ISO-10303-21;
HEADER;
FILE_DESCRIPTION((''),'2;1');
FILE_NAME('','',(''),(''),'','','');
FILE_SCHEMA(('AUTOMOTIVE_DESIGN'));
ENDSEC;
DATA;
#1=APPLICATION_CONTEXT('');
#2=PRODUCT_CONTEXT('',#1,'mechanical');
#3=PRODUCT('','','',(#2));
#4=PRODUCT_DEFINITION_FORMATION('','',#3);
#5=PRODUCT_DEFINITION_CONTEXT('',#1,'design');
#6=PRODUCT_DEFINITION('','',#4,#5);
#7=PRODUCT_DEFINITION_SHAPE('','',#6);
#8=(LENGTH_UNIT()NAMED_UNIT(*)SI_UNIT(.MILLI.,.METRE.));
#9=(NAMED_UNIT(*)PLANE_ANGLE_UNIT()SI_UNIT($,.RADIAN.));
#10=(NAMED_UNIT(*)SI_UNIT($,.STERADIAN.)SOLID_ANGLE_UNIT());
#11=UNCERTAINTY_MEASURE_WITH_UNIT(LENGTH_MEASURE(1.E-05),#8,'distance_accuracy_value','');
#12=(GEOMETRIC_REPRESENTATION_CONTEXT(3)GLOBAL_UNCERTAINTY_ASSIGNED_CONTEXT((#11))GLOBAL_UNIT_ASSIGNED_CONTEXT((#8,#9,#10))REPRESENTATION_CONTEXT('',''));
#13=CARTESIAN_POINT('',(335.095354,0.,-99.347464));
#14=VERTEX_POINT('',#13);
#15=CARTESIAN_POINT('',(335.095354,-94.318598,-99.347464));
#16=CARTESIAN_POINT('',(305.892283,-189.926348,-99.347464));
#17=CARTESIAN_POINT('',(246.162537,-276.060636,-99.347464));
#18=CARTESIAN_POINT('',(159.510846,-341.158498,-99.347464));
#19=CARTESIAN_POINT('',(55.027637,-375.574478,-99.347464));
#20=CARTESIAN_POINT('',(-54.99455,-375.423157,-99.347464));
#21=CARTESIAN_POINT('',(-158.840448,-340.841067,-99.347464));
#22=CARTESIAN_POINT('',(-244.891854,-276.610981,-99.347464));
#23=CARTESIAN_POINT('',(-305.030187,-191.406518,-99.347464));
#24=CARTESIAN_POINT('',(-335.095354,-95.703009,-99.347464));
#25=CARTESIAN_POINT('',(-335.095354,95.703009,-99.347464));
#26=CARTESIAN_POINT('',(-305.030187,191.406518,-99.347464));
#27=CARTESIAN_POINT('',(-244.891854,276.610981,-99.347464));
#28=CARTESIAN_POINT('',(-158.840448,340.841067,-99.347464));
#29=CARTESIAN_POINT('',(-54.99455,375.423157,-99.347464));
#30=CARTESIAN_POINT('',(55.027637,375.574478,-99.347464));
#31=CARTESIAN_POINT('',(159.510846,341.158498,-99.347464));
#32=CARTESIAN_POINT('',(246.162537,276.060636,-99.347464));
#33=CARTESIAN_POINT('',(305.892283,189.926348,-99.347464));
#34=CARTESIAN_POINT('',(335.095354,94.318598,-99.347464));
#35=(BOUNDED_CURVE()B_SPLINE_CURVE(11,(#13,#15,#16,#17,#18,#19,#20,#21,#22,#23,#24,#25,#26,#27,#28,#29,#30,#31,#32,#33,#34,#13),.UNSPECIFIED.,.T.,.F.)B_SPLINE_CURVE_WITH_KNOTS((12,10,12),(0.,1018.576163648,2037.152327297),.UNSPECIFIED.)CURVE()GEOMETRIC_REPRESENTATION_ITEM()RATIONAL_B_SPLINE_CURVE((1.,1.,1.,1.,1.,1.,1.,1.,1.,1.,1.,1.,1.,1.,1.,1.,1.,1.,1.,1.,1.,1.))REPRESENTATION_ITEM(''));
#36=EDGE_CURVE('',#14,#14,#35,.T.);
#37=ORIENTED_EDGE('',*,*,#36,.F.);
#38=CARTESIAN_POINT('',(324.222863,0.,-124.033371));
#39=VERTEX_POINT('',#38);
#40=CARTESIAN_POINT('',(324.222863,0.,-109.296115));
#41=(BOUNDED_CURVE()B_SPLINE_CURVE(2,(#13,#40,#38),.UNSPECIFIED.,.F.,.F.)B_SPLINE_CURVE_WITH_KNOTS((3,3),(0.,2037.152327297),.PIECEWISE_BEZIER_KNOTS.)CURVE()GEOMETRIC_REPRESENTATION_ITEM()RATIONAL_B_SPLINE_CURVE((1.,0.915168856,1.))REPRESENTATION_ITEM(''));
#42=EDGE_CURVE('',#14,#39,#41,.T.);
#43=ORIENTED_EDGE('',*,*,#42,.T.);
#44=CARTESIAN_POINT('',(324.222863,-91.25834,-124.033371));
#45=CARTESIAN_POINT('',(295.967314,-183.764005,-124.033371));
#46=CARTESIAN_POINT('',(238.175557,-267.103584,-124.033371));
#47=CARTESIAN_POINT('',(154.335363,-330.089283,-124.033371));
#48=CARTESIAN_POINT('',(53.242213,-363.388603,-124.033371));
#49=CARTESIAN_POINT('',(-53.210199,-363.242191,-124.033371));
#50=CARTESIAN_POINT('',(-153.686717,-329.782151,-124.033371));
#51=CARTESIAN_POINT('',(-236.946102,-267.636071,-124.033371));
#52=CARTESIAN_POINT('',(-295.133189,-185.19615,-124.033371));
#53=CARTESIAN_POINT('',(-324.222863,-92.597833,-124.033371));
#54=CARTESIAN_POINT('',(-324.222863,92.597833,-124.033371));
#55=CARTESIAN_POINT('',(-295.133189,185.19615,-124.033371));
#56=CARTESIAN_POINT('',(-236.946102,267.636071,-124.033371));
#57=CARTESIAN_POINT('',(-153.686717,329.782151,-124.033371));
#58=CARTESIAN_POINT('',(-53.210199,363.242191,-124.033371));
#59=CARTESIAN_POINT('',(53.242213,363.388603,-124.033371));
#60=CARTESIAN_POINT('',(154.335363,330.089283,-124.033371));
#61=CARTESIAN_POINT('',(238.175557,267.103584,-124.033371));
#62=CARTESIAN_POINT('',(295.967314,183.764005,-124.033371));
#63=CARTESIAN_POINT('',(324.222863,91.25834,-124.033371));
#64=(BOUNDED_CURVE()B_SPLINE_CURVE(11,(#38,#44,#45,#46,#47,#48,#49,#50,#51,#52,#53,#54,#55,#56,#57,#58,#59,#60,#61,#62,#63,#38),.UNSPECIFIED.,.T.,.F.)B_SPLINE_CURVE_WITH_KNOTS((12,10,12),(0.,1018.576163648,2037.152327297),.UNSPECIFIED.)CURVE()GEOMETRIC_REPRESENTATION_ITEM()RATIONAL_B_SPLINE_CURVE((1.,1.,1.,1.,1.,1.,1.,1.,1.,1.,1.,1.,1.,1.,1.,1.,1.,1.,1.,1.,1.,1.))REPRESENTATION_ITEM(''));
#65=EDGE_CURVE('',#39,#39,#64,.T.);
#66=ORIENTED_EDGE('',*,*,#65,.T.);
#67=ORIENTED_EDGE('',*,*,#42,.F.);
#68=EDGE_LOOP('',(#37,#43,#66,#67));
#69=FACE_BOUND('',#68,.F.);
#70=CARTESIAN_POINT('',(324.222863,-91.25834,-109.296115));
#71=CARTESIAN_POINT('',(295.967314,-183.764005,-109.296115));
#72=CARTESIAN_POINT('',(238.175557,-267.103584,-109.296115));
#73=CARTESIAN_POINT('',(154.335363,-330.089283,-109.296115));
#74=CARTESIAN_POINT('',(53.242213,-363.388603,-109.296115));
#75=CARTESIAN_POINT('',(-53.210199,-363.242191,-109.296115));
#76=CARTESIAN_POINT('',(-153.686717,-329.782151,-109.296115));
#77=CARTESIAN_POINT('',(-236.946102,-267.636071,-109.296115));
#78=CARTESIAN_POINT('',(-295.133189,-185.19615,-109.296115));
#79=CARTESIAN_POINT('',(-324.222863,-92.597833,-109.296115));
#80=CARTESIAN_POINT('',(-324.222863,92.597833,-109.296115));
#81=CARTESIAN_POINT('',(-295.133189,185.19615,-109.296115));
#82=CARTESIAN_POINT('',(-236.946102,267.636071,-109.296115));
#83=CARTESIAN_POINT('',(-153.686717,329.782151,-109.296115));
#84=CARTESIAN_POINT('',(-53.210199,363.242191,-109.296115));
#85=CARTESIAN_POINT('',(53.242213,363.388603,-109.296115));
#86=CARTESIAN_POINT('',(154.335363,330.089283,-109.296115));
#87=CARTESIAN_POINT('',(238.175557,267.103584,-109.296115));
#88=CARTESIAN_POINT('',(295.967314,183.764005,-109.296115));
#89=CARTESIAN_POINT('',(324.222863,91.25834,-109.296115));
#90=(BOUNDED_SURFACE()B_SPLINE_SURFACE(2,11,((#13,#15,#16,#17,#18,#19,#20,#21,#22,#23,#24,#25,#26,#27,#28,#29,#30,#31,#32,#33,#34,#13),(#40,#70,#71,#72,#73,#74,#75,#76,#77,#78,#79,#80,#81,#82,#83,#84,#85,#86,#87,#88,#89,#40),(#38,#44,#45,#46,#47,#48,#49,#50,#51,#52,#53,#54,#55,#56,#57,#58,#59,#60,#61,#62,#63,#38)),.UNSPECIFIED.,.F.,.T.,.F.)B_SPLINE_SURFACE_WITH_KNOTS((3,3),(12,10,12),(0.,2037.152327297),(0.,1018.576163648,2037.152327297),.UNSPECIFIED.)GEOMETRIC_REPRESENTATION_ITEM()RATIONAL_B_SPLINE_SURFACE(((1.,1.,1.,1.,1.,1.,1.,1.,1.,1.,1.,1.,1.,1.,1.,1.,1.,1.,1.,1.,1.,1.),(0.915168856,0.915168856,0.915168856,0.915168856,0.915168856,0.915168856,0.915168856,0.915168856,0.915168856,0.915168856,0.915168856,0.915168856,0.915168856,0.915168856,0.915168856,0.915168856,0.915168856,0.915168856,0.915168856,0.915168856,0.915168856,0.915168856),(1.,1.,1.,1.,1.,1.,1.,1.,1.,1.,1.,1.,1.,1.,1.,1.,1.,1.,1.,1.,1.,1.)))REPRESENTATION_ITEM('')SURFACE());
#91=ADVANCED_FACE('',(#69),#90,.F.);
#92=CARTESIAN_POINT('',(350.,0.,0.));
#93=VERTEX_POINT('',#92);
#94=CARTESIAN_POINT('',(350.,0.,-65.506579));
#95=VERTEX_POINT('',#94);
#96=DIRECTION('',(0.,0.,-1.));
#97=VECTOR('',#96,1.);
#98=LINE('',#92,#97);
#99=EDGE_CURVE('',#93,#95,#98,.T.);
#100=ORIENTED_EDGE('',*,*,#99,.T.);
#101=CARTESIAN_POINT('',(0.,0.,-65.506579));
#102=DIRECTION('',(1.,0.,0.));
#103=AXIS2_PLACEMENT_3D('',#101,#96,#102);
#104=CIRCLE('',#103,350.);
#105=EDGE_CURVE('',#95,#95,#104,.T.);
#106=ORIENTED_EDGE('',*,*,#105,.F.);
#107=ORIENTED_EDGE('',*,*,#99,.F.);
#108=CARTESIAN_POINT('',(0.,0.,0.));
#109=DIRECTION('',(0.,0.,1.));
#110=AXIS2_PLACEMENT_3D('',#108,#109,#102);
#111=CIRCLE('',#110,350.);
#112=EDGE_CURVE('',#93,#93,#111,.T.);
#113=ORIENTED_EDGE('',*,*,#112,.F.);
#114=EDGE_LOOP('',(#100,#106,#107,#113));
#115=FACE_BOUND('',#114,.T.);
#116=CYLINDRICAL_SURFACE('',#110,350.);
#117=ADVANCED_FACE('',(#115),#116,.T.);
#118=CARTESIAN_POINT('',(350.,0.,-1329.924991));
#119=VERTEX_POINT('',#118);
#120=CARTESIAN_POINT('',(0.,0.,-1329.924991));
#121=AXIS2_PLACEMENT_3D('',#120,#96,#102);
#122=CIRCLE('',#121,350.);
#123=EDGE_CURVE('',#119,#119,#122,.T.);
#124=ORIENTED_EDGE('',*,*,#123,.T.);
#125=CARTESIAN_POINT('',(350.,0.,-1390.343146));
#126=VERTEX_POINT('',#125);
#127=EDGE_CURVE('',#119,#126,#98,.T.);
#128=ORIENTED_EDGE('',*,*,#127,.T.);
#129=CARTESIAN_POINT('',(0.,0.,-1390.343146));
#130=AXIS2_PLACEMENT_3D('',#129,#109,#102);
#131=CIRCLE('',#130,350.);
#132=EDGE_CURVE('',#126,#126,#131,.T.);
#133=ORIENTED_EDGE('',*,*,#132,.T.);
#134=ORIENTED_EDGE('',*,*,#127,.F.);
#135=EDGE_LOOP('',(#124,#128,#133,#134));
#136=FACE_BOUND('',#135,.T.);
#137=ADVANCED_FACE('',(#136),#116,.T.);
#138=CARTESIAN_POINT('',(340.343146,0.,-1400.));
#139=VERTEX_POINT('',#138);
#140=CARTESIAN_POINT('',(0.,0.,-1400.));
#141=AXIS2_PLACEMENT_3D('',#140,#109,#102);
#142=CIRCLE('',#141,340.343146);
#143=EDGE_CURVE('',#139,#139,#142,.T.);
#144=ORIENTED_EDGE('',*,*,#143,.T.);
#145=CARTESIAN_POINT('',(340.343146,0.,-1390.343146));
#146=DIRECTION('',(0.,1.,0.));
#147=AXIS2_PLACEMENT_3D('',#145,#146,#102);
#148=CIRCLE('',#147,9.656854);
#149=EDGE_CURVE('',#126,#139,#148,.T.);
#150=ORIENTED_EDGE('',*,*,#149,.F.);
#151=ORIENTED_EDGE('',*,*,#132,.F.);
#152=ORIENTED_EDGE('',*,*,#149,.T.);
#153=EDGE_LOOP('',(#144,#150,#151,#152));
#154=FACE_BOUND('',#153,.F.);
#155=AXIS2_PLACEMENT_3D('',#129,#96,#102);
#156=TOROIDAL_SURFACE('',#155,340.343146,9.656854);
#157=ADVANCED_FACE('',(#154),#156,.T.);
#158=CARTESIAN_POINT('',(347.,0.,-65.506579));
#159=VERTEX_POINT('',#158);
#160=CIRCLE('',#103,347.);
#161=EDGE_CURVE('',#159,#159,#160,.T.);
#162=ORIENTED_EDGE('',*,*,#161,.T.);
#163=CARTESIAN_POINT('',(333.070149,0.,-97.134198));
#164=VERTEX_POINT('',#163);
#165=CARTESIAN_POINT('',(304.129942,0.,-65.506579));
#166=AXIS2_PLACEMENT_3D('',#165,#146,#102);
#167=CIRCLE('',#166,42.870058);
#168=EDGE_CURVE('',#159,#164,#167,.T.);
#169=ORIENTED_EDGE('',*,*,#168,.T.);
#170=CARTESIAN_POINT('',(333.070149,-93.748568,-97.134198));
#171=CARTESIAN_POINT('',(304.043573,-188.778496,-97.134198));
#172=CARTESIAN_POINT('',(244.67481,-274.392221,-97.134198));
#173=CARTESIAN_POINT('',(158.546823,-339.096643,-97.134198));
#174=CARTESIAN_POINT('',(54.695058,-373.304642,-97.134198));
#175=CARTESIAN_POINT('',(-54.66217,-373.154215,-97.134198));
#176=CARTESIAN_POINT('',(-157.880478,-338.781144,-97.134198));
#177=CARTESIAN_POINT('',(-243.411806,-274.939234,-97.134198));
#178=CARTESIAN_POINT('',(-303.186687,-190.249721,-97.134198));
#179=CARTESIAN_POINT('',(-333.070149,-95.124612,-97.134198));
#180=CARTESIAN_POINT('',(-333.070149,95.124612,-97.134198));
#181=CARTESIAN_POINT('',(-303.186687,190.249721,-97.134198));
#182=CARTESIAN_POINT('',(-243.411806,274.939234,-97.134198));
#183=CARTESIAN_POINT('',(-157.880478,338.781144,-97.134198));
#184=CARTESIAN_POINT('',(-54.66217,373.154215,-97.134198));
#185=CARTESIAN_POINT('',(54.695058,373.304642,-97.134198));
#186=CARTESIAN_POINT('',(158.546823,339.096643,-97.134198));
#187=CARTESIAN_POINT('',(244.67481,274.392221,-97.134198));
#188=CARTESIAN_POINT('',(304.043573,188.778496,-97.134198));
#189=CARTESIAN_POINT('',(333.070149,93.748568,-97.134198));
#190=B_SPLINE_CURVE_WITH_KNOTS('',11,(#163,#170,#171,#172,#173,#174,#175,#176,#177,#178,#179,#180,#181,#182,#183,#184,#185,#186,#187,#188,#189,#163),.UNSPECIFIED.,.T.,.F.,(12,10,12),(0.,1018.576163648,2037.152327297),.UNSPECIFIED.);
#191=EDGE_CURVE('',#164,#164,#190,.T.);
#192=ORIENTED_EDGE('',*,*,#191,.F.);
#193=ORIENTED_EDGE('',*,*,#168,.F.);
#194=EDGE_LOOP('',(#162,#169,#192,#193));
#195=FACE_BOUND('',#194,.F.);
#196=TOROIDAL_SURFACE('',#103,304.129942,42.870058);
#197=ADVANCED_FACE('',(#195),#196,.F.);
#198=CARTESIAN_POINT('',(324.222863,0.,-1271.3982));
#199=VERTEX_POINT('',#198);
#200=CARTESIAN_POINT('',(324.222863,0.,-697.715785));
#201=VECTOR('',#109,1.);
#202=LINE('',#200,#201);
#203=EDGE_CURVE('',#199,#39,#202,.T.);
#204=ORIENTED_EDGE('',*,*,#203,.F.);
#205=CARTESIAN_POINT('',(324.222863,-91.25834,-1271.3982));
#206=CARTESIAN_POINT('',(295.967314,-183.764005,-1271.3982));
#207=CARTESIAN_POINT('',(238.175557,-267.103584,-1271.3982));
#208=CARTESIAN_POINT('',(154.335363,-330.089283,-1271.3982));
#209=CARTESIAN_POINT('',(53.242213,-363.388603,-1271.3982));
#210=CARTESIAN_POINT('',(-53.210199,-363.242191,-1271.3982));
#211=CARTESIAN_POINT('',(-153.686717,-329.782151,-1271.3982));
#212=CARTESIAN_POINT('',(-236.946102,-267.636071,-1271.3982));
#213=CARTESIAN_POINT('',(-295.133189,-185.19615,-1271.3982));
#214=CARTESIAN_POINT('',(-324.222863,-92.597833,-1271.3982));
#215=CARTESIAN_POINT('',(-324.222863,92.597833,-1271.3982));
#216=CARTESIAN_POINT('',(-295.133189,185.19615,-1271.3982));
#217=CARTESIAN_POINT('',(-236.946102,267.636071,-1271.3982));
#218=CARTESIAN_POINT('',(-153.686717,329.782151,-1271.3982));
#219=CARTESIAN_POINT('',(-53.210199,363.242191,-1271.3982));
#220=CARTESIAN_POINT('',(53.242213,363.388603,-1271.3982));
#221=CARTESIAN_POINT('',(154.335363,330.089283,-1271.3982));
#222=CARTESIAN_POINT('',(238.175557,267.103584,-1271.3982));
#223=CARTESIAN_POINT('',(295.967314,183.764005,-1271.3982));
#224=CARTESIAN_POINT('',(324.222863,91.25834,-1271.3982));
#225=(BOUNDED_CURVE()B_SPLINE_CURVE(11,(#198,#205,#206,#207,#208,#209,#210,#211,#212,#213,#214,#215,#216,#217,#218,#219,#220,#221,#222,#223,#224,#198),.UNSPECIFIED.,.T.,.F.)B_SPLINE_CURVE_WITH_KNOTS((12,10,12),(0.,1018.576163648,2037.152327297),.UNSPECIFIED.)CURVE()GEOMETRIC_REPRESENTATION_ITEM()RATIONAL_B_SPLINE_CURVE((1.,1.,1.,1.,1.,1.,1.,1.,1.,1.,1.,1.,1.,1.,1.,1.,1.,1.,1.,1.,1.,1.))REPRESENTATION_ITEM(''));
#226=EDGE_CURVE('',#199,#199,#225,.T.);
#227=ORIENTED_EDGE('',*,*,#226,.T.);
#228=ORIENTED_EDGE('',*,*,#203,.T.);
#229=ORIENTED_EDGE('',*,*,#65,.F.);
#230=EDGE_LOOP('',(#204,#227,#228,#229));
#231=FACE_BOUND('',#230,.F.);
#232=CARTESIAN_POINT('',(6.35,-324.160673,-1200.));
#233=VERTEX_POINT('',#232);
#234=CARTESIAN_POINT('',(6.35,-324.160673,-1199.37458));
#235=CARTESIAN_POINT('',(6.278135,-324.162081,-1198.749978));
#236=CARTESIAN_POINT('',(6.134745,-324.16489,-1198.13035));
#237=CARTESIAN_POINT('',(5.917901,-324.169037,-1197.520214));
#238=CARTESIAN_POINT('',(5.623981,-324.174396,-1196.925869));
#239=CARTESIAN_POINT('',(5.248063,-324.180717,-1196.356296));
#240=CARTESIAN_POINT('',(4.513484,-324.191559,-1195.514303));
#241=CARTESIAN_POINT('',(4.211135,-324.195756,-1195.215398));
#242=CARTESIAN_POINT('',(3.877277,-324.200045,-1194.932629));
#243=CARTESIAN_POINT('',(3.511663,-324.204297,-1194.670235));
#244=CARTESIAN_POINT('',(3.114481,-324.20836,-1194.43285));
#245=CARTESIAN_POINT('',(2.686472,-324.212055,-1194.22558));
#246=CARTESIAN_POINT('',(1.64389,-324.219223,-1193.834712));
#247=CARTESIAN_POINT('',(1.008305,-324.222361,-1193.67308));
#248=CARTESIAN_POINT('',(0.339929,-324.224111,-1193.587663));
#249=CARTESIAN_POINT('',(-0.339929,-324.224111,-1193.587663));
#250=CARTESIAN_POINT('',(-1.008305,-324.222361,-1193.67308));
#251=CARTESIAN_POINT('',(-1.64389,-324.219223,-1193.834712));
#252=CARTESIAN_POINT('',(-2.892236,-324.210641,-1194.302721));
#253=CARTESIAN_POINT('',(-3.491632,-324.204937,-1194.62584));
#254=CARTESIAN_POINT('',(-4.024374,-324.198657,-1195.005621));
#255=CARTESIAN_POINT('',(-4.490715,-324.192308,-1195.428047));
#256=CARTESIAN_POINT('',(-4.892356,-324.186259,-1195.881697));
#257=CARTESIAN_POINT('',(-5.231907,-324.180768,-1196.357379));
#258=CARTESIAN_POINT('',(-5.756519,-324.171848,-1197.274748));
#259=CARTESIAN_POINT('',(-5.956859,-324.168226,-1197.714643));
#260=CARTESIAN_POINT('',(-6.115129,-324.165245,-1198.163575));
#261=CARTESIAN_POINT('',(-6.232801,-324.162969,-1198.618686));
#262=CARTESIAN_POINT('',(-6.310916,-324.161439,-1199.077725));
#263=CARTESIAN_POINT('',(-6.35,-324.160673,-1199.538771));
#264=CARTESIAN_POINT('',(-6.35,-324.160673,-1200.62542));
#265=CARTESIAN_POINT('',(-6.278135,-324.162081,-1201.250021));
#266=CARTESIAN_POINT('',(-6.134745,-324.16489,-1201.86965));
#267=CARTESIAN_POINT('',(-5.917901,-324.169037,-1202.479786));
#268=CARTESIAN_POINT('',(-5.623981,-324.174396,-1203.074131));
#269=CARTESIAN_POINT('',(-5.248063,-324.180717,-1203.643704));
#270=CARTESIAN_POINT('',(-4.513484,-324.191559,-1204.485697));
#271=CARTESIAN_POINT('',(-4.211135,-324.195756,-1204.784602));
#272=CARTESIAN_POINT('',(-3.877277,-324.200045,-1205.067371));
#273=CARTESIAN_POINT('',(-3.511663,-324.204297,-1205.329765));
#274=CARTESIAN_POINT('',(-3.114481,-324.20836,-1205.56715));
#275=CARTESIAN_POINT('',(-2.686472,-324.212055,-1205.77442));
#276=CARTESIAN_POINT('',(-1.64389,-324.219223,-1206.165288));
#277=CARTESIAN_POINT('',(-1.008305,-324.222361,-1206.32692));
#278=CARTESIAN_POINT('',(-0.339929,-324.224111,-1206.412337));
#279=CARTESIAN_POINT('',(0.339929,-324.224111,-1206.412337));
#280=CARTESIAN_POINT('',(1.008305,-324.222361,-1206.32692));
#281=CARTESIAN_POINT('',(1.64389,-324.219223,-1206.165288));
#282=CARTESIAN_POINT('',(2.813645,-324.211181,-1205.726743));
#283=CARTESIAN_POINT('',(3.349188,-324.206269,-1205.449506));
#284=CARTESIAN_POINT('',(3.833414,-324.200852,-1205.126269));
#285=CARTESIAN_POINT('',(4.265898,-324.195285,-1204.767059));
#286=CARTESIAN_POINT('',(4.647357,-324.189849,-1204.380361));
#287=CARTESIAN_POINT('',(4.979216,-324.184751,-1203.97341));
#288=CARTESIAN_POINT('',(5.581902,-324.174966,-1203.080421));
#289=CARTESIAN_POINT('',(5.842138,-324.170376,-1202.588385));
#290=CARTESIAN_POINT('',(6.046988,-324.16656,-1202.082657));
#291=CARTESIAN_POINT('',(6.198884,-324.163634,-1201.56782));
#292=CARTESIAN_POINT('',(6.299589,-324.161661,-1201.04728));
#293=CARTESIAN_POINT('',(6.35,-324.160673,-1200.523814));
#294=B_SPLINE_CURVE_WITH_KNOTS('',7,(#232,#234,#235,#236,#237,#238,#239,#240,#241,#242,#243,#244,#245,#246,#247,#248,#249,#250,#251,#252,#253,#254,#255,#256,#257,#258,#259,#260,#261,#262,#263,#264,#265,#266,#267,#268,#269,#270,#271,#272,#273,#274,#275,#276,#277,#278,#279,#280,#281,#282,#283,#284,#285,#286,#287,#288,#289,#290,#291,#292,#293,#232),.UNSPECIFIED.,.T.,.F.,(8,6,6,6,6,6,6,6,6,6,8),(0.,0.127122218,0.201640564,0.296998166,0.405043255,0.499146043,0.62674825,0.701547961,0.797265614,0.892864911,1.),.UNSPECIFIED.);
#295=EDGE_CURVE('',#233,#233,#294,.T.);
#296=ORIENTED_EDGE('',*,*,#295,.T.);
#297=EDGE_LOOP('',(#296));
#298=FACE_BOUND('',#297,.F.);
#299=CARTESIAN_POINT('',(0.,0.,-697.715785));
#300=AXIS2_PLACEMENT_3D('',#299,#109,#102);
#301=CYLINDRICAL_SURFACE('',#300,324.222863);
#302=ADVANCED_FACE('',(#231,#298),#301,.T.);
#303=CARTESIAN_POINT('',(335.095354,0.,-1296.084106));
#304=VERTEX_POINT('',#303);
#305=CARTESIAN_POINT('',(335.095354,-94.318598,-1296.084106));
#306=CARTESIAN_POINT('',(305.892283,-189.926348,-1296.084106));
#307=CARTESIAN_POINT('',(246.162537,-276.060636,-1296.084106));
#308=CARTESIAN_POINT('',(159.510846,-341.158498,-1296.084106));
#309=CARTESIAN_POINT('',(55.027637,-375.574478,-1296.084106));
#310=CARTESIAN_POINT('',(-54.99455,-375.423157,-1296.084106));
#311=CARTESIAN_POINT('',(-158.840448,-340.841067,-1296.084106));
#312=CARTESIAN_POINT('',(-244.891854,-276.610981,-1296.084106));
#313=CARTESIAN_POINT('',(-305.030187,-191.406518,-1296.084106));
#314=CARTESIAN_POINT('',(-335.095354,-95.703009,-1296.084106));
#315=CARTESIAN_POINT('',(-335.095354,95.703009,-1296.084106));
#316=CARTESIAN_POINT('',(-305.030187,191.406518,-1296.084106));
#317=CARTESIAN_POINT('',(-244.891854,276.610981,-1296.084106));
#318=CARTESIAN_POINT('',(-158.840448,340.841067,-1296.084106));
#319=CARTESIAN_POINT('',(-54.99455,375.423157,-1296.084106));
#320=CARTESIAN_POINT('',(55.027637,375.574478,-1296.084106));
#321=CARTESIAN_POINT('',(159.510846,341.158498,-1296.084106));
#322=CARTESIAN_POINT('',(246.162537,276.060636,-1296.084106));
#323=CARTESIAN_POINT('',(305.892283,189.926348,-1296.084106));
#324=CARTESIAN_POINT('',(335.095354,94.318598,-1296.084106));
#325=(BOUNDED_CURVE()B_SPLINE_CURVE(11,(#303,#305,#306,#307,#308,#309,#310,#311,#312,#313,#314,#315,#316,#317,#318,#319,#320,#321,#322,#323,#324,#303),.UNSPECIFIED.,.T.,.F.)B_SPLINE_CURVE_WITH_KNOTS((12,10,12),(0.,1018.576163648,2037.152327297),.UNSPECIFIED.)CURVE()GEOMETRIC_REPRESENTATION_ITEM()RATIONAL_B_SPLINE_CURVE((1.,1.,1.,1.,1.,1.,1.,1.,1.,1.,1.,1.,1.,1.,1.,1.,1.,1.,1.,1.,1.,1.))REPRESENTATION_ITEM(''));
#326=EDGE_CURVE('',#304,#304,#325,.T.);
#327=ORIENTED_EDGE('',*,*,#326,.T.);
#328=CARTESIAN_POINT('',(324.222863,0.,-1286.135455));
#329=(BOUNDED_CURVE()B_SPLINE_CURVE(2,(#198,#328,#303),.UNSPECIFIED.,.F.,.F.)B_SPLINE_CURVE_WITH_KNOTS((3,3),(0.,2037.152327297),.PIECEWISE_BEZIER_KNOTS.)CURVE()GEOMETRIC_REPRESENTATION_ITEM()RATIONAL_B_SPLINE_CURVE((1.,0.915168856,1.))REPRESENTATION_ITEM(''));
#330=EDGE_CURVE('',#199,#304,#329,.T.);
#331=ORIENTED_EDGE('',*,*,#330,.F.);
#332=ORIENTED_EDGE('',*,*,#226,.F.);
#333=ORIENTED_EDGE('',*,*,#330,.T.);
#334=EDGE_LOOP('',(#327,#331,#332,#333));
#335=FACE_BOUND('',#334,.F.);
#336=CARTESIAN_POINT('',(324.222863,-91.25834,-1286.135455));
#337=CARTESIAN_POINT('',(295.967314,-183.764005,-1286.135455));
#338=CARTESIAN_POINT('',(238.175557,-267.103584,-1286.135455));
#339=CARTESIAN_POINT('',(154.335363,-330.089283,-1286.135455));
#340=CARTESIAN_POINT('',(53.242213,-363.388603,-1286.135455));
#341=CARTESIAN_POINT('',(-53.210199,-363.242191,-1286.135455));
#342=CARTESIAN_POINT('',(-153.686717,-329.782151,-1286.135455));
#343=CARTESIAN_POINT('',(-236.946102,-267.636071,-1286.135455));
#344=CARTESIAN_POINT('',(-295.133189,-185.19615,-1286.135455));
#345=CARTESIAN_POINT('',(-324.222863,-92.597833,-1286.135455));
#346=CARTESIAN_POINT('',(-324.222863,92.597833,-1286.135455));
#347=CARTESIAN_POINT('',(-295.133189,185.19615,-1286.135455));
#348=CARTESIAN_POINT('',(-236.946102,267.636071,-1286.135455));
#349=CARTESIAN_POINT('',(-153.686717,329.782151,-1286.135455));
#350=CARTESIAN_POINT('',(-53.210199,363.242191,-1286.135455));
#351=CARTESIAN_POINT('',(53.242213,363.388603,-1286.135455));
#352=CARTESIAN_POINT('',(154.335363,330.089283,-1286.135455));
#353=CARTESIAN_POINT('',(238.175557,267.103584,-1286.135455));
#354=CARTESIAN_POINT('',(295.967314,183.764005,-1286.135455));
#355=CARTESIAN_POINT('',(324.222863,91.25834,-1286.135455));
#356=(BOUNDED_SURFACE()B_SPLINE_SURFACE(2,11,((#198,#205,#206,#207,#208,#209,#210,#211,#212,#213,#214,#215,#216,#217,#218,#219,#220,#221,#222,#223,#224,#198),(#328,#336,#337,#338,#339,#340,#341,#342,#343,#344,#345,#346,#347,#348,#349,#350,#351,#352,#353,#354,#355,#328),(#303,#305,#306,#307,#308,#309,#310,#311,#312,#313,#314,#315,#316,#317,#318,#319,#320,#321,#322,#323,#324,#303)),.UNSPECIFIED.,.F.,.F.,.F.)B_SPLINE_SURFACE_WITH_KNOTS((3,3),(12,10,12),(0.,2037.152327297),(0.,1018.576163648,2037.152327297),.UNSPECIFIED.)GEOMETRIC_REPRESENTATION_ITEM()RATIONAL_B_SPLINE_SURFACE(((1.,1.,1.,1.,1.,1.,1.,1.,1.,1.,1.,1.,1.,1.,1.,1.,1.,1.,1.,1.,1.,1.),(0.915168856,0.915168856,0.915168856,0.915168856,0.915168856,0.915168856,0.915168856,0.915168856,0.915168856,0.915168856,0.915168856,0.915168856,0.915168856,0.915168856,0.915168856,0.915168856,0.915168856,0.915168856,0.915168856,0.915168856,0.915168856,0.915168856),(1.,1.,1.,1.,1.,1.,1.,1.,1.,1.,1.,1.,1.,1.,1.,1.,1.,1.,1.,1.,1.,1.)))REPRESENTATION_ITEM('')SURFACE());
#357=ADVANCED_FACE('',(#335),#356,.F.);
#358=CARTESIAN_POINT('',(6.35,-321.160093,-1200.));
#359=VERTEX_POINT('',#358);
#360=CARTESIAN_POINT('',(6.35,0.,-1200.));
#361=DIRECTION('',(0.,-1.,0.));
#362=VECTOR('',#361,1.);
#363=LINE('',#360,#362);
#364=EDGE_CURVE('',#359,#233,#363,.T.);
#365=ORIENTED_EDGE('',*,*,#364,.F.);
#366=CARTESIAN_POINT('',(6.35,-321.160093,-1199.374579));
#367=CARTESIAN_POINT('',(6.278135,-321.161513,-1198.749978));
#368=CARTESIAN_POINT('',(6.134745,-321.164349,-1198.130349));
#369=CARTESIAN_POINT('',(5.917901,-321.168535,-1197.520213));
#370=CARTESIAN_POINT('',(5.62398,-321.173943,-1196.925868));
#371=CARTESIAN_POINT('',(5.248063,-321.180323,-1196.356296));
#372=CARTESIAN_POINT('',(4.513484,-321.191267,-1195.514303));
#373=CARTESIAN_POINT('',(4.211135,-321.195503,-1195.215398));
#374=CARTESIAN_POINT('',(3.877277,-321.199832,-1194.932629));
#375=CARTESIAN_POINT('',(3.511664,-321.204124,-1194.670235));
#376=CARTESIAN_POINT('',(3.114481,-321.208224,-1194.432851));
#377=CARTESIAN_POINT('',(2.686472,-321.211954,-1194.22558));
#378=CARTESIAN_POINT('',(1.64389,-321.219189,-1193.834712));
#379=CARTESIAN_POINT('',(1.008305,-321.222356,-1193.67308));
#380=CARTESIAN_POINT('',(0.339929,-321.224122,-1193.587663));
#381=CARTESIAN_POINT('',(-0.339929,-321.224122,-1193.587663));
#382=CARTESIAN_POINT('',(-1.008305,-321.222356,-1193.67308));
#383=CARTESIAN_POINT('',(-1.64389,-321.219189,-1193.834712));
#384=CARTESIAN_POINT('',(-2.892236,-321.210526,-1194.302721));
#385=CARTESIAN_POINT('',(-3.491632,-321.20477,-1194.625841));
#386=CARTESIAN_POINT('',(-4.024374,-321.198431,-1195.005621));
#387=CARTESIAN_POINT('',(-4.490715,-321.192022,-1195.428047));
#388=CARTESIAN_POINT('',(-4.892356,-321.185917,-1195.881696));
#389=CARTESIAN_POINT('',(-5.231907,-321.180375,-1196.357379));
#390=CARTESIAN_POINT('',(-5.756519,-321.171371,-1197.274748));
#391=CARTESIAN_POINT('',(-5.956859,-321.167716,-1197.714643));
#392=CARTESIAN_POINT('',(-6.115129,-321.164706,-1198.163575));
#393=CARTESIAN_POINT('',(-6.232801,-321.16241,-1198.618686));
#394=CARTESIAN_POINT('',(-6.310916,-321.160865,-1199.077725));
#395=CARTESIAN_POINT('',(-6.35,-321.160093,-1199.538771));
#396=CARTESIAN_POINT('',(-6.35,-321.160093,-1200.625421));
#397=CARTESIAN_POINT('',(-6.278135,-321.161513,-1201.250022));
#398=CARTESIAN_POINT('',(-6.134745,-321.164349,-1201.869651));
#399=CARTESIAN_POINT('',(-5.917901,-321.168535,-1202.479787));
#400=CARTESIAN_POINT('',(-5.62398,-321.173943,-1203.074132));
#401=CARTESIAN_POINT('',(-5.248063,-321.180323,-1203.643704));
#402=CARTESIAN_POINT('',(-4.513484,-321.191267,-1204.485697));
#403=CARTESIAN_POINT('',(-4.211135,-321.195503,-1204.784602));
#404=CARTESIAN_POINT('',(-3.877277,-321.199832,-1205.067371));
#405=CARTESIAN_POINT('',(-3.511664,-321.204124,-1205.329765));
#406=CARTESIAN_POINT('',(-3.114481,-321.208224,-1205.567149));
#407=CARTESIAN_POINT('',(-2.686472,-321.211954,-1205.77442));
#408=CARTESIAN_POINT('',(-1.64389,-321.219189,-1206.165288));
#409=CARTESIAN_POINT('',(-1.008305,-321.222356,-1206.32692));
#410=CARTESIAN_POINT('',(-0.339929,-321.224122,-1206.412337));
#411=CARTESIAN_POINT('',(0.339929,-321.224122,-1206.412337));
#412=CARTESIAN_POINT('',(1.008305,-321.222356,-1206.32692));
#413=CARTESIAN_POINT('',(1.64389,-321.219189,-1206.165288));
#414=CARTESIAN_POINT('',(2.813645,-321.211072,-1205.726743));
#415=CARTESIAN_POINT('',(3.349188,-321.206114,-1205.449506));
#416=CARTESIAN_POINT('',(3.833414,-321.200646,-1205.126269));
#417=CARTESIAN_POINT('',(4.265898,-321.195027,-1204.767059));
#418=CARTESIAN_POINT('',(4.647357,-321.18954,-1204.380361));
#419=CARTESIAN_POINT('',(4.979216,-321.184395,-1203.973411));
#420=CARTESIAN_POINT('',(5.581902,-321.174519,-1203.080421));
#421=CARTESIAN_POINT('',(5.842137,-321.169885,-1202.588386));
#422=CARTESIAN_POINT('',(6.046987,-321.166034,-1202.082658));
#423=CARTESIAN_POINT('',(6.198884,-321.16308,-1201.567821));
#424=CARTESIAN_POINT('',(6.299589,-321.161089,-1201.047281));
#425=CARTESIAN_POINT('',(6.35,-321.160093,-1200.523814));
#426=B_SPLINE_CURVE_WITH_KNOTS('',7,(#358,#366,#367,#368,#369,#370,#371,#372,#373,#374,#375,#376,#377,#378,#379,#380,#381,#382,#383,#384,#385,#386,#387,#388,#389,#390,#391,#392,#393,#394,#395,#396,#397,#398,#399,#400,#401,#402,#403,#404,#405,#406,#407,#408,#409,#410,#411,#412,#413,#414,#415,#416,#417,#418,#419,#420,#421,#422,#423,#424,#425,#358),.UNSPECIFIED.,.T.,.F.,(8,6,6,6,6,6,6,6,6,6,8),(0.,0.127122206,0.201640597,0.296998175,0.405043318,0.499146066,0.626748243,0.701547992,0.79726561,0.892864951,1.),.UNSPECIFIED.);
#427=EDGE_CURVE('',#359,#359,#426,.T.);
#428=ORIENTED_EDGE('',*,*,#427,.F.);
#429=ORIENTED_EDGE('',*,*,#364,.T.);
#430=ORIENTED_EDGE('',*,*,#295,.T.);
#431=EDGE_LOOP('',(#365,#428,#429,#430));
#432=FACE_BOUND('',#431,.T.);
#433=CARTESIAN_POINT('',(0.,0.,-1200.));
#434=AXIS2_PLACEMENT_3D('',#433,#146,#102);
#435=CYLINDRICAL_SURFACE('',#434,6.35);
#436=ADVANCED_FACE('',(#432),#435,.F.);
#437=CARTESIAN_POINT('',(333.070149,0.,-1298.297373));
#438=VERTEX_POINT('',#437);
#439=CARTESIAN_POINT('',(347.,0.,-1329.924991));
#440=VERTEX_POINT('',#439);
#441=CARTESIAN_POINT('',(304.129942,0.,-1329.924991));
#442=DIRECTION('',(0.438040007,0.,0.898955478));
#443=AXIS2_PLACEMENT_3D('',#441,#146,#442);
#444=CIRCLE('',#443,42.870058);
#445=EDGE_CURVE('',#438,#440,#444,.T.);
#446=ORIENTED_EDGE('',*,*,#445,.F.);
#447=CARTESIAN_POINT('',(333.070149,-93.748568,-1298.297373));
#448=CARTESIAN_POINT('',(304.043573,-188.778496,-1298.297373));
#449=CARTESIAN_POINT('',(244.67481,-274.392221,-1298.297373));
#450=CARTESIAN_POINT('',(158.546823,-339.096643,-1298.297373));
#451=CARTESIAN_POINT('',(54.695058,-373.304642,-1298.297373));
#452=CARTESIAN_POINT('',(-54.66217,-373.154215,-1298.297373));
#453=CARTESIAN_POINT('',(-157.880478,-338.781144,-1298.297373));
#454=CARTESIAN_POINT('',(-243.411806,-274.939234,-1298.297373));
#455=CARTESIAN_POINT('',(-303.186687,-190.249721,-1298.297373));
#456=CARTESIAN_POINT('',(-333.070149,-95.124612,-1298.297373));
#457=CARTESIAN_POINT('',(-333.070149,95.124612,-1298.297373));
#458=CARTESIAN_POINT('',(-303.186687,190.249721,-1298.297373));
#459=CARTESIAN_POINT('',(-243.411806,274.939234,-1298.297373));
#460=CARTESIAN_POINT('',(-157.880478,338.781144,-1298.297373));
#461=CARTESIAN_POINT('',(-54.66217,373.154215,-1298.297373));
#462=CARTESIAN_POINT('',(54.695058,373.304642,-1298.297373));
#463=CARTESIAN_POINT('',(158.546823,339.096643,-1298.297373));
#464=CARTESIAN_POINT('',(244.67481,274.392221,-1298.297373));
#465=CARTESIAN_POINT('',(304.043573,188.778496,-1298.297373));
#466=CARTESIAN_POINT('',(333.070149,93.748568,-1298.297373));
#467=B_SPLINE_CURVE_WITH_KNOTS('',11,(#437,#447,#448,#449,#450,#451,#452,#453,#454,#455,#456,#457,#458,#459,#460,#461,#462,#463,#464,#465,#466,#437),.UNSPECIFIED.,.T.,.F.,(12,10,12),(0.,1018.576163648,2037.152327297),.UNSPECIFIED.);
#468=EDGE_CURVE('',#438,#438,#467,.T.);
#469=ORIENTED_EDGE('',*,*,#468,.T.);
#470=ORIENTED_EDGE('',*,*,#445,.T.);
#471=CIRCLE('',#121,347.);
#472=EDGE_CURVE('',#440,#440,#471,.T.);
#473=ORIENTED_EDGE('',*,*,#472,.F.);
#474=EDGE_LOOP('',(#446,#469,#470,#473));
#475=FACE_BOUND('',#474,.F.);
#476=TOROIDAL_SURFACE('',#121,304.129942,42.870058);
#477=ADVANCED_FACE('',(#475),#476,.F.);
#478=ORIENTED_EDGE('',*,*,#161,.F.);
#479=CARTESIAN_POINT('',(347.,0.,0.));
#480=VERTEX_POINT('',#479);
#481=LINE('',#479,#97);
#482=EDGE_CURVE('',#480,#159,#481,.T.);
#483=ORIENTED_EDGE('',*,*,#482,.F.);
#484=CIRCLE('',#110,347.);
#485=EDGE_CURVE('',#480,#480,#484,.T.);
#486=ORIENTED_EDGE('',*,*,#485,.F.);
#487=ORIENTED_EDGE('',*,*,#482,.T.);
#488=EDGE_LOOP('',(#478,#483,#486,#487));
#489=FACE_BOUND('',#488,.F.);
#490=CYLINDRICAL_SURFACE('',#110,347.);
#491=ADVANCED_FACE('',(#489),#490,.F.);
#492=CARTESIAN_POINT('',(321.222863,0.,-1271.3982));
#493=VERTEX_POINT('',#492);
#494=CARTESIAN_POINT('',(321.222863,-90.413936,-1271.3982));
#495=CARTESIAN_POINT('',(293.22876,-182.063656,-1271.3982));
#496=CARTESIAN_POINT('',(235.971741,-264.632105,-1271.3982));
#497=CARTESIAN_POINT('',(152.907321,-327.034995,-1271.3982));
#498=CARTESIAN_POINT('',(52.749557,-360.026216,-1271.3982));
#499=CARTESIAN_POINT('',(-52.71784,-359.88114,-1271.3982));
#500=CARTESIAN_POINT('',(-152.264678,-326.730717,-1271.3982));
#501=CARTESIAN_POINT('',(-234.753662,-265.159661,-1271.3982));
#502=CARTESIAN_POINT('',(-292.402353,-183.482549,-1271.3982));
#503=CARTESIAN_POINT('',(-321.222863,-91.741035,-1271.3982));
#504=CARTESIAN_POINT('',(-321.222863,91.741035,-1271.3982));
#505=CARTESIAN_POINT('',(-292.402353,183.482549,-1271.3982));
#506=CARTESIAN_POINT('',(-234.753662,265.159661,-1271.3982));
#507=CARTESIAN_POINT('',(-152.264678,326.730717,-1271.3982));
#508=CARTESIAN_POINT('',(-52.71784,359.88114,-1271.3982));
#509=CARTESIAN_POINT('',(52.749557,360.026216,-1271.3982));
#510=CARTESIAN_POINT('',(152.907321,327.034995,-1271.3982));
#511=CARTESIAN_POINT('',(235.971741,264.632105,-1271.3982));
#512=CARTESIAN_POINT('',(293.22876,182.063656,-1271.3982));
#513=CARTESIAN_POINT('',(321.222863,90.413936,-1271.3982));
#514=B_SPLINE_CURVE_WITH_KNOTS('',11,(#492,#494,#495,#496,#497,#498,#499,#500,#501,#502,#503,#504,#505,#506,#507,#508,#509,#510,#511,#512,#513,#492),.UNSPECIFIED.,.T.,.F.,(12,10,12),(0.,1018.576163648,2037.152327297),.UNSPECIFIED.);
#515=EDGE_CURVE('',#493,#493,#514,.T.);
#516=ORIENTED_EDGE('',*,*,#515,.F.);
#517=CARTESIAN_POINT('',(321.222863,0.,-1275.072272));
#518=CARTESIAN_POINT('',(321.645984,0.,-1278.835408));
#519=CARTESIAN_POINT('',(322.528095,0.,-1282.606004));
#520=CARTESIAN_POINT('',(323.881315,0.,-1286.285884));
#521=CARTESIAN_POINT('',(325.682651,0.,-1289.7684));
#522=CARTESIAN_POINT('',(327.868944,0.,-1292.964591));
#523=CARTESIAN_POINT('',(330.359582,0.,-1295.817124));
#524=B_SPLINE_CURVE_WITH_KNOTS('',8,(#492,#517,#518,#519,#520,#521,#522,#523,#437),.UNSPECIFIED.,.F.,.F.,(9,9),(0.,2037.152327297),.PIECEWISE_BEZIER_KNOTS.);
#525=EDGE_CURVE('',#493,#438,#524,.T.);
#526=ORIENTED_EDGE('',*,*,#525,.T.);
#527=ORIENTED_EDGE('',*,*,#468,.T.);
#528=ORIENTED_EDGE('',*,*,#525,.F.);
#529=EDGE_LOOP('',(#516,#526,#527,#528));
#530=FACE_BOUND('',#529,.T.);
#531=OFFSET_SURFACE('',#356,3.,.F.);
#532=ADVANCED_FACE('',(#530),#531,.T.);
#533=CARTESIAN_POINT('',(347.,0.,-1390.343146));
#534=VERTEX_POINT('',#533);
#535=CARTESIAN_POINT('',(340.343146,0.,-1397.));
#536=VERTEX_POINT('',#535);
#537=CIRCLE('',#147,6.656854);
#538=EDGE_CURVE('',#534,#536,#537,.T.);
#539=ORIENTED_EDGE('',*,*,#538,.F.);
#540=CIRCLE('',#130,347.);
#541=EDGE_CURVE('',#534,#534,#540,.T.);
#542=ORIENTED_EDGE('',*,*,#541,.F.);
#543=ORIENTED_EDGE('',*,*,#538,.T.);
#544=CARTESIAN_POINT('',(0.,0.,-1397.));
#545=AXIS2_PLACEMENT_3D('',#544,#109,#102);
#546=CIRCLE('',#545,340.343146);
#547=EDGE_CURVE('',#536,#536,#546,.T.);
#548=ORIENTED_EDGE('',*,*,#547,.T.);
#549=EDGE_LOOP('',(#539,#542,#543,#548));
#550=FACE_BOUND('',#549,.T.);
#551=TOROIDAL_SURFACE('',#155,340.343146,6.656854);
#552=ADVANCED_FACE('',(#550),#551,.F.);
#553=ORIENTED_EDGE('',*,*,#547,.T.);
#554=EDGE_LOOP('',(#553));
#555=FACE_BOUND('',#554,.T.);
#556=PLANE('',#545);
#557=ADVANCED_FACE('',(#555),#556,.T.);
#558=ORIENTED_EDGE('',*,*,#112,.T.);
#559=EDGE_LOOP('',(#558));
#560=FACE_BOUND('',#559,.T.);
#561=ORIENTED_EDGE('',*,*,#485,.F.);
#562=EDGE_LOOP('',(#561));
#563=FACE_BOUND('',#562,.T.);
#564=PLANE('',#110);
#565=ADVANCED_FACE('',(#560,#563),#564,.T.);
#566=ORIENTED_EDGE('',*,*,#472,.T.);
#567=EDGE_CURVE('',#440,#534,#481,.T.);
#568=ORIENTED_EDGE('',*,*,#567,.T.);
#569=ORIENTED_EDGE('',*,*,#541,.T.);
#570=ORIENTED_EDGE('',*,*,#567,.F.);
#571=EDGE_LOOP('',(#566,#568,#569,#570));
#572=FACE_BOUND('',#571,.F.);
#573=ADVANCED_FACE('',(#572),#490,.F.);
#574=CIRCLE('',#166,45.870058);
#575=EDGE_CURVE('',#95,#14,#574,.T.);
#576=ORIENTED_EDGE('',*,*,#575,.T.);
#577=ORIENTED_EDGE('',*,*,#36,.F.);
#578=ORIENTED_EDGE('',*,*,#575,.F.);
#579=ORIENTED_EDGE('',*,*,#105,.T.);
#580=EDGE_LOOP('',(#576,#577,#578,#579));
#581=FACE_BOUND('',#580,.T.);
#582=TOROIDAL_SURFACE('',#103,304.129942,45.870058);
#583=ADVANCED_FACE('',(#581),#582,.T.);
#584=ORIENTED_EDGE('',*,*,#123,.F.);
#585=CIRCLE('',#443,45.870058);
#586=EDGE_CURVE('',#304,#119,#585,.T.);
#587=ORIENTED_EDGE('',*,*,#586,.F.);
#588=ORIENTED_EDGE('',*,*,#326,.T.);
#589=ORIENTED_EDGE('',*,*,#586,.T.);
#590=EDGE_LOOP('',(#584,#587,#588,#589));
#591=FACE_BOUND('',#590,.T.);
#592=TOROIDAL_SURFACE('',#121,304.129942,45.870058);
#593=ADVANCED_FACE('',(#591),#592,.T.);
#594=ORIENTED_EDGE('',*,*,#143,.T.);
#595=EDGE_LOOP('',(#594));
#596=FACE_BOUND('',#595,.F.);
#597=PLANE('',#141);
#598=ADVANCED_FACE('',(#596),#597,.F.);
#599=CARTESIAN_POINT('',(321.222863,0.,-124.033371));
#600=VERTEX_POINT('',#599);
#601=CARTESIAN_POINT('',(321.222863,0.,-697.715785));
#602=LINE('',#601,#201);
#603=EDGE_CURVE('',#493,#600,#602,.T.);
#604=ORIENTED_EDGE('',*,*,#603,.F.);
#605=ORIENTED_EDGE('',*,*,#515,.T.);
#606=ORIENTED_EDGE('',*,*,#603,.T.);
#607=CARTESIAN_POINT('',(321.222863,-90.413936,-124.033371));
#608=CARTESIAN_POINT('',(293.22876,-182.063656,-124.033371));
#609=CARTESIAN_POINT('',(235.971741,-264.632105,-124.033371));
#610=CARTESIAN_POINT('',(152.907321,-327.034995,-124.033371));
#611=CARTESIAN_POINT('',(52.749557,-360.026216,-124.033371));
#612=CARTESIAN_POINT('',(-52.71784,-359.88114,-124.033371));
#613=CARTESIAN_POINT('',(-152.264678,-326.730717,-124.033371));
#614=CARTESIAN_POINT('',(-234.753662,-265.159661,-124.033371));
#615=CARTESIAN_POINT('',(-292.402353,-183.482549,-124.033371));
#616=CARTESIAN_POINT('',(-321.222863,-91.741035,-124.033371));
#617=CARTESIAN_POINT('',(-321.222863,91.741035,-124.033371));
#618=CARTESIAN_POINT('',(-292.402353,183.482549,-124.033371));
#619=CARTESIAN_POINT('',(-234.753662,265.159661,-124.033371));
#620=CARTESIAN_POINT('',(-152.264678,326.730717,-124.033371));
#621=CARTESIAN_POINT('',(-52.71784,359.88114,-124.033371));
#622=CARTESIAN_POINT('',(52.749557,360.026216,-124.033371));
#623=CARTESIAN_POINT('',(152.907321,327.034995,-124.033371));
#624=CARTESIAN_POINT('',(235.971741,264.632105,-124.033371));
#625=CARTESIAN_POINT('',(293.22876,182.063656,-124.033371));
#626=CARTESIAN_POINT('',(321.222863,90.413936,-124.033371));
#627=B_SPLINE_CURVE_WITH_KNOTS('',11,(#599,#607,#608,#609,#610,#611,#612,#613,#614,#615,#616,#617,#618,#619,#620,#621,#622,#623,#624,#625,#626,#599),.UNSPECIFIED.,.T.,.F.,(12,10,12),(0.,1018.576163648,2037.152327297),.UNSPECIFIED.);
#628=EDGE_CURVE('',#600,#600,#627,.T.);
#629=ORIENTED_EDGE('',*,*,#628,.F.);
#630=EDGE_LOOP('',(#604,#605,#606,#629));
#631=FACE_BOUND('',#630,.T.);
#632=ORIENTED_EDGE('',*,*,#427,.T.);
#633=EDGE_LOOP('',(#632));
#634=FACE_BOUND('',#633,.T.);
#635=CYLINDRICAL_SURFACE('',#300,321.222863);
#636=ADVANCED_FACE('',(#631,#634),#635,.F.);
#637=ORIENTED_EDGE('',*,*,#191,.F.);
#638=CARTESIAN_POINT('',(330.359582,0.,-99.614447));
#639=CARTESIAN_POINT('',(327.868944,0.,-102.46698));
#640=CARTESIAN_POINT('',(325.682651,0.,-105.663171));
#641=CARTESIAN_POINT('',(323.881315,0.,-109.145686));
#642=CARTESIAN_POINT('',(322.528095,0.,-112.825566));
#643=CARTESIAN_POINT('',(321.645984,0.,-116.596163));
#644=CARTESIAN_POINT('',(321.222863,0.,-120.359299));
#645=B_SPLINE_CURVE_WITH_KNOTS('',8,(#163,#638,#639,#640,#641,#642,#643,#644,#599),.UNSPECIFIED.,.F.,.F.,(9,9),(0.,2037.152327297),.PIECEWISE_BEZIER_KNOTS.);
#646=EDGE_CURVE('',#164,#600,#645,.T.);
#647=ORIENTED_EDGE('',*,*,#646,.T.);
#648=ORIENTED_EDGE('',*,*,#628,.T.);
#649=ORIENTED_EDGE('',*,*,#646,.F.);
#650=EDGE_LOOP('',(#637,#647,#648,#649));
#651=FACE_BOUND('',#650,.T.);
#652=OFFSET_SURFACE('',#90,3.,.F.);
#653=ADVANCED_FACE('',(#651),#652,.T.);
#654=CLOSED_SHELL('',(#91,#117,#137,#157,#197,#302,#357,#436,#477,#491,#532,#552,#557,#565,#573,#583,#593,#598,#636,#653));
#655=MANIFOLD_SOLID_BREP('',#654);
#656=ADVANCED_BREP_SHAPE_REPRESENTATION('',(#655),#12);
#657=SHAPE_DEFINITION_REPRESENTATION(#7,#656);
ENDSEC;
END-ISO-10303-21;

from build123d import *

# Parameters (mm, degrees)
F0_R     = 350
F1_DEPTH = 1400
F3_W     = 25.7771372795
F3_H     = 1181.948132813
F6_R     = 33.4608263206
F7_R     = 9.6568542495
F8_T     = -3
F2_R     = 6.35
F9_REACH = 367.9615123421


# Not quite as in the source:
# - a fillet or chamfer that OpenCascade refuses, or shapes differently, is made with other operations: its cross-section is extruded or revolved along the edge and cut away or added


with BuildPart() as f1:
    # F0 (on Top) → F1 (new body)
    with BuildSketch(Plane.XY):
        Circle(F0_R)
    extrude(amount=-F1_DEPTH)

    # F3 (on Front) → F4 (revolve, cut)
    with BuildSketch(Plane.XZ):
        with Locations((337.1114313602, -697.7157853544)):
            Rectangle(F3_W, F3_H)
    revolve(axis=Axis((0, 0, -700), (0, 0, -1)), mode=Mode.SUBTRACT)

    # F5: fillet of radius 45.8700576851 on 2 edges, made by hand

    # F5_s1 → F5_t2 (revolve, cut)
    with BuildSketch(Plane.XZ):
        with BuildLine():
            ThreePointArc((350, -65.5065793021), (343.0254793989, -89.8211713608), (324.2228627205, -106.7417189479))
            Line((324.2228627205, -106.7417189479), (350, -106.7417189479))
            Line((350, -106.7417189479), (350, -65.5065793021))
        make_face()
    revolve(axis=Axis((0, 0, -106.7417189479), (0, 0, -1)), mode=Mode.SUBTRACT)

    # F5_s3 → F5_t4 (revolve, cut)
    with BuildSketch(Plane.XZ):
        with BuildLine():
            ThreePointArc((324.2228627205, -1288.6898517609), (343.0254793989, -1305.6103993479), (350, -1329.9249914067))
            Line((350, -1329.9249914067), (350, -1288.6898517609))
            Line((350, -1288.6898517609), (324.2228627205, -1288.6898517609))
        make_face()
    revolve(axis=Axis((0, 0, -1288.6898517609), (0, 0, -1)), mode=Mode.SUBTRACT)

    # F6
    f6_edges = [f1.edges().sort_by_distance(p)[0] for p in [
        (-324.222863, 0, -106.741719),
        (324.222863, 0, -697.715785),
        (-324.222863, 0, -1288.689852),
    ]]
    fillet(f6_edges, radius=F6_R)

    # F7
    f7_edges = [f1.edges().sort_by_distance(p)[0] for p in [
        (-350, 0, -1400),
    ]]
    fillet(f7_edges, radius=F7_R)

    # F8
    f8_openings = [f1.faces().sort_by_distance(p)[0] for p in [
        (0, 0, 0),
    ]]
    offset(amount=F8_T, openings=f8_openings)

    f9_end = f1.faces().sort_by_distance((-324.2228627205, 0, -697.7157853554))[0]
    # F2 (on Front) → F9 (cut, up to a face of the model that its end follows)
    with BuildSketch(Plane.XZ):
        with Locations((0, -1200)):
            Circle(F2_R)
    f9_long = extrude(amount=F9_REACH, mode=Mode.PRIVATE)
    add(split(f9_long, bisect_by=f9_end, keep=Keep.BOTTOM, mode=Mode.PRIVATE), mode=Mode.SUBTRACT)


solid = f1.part
